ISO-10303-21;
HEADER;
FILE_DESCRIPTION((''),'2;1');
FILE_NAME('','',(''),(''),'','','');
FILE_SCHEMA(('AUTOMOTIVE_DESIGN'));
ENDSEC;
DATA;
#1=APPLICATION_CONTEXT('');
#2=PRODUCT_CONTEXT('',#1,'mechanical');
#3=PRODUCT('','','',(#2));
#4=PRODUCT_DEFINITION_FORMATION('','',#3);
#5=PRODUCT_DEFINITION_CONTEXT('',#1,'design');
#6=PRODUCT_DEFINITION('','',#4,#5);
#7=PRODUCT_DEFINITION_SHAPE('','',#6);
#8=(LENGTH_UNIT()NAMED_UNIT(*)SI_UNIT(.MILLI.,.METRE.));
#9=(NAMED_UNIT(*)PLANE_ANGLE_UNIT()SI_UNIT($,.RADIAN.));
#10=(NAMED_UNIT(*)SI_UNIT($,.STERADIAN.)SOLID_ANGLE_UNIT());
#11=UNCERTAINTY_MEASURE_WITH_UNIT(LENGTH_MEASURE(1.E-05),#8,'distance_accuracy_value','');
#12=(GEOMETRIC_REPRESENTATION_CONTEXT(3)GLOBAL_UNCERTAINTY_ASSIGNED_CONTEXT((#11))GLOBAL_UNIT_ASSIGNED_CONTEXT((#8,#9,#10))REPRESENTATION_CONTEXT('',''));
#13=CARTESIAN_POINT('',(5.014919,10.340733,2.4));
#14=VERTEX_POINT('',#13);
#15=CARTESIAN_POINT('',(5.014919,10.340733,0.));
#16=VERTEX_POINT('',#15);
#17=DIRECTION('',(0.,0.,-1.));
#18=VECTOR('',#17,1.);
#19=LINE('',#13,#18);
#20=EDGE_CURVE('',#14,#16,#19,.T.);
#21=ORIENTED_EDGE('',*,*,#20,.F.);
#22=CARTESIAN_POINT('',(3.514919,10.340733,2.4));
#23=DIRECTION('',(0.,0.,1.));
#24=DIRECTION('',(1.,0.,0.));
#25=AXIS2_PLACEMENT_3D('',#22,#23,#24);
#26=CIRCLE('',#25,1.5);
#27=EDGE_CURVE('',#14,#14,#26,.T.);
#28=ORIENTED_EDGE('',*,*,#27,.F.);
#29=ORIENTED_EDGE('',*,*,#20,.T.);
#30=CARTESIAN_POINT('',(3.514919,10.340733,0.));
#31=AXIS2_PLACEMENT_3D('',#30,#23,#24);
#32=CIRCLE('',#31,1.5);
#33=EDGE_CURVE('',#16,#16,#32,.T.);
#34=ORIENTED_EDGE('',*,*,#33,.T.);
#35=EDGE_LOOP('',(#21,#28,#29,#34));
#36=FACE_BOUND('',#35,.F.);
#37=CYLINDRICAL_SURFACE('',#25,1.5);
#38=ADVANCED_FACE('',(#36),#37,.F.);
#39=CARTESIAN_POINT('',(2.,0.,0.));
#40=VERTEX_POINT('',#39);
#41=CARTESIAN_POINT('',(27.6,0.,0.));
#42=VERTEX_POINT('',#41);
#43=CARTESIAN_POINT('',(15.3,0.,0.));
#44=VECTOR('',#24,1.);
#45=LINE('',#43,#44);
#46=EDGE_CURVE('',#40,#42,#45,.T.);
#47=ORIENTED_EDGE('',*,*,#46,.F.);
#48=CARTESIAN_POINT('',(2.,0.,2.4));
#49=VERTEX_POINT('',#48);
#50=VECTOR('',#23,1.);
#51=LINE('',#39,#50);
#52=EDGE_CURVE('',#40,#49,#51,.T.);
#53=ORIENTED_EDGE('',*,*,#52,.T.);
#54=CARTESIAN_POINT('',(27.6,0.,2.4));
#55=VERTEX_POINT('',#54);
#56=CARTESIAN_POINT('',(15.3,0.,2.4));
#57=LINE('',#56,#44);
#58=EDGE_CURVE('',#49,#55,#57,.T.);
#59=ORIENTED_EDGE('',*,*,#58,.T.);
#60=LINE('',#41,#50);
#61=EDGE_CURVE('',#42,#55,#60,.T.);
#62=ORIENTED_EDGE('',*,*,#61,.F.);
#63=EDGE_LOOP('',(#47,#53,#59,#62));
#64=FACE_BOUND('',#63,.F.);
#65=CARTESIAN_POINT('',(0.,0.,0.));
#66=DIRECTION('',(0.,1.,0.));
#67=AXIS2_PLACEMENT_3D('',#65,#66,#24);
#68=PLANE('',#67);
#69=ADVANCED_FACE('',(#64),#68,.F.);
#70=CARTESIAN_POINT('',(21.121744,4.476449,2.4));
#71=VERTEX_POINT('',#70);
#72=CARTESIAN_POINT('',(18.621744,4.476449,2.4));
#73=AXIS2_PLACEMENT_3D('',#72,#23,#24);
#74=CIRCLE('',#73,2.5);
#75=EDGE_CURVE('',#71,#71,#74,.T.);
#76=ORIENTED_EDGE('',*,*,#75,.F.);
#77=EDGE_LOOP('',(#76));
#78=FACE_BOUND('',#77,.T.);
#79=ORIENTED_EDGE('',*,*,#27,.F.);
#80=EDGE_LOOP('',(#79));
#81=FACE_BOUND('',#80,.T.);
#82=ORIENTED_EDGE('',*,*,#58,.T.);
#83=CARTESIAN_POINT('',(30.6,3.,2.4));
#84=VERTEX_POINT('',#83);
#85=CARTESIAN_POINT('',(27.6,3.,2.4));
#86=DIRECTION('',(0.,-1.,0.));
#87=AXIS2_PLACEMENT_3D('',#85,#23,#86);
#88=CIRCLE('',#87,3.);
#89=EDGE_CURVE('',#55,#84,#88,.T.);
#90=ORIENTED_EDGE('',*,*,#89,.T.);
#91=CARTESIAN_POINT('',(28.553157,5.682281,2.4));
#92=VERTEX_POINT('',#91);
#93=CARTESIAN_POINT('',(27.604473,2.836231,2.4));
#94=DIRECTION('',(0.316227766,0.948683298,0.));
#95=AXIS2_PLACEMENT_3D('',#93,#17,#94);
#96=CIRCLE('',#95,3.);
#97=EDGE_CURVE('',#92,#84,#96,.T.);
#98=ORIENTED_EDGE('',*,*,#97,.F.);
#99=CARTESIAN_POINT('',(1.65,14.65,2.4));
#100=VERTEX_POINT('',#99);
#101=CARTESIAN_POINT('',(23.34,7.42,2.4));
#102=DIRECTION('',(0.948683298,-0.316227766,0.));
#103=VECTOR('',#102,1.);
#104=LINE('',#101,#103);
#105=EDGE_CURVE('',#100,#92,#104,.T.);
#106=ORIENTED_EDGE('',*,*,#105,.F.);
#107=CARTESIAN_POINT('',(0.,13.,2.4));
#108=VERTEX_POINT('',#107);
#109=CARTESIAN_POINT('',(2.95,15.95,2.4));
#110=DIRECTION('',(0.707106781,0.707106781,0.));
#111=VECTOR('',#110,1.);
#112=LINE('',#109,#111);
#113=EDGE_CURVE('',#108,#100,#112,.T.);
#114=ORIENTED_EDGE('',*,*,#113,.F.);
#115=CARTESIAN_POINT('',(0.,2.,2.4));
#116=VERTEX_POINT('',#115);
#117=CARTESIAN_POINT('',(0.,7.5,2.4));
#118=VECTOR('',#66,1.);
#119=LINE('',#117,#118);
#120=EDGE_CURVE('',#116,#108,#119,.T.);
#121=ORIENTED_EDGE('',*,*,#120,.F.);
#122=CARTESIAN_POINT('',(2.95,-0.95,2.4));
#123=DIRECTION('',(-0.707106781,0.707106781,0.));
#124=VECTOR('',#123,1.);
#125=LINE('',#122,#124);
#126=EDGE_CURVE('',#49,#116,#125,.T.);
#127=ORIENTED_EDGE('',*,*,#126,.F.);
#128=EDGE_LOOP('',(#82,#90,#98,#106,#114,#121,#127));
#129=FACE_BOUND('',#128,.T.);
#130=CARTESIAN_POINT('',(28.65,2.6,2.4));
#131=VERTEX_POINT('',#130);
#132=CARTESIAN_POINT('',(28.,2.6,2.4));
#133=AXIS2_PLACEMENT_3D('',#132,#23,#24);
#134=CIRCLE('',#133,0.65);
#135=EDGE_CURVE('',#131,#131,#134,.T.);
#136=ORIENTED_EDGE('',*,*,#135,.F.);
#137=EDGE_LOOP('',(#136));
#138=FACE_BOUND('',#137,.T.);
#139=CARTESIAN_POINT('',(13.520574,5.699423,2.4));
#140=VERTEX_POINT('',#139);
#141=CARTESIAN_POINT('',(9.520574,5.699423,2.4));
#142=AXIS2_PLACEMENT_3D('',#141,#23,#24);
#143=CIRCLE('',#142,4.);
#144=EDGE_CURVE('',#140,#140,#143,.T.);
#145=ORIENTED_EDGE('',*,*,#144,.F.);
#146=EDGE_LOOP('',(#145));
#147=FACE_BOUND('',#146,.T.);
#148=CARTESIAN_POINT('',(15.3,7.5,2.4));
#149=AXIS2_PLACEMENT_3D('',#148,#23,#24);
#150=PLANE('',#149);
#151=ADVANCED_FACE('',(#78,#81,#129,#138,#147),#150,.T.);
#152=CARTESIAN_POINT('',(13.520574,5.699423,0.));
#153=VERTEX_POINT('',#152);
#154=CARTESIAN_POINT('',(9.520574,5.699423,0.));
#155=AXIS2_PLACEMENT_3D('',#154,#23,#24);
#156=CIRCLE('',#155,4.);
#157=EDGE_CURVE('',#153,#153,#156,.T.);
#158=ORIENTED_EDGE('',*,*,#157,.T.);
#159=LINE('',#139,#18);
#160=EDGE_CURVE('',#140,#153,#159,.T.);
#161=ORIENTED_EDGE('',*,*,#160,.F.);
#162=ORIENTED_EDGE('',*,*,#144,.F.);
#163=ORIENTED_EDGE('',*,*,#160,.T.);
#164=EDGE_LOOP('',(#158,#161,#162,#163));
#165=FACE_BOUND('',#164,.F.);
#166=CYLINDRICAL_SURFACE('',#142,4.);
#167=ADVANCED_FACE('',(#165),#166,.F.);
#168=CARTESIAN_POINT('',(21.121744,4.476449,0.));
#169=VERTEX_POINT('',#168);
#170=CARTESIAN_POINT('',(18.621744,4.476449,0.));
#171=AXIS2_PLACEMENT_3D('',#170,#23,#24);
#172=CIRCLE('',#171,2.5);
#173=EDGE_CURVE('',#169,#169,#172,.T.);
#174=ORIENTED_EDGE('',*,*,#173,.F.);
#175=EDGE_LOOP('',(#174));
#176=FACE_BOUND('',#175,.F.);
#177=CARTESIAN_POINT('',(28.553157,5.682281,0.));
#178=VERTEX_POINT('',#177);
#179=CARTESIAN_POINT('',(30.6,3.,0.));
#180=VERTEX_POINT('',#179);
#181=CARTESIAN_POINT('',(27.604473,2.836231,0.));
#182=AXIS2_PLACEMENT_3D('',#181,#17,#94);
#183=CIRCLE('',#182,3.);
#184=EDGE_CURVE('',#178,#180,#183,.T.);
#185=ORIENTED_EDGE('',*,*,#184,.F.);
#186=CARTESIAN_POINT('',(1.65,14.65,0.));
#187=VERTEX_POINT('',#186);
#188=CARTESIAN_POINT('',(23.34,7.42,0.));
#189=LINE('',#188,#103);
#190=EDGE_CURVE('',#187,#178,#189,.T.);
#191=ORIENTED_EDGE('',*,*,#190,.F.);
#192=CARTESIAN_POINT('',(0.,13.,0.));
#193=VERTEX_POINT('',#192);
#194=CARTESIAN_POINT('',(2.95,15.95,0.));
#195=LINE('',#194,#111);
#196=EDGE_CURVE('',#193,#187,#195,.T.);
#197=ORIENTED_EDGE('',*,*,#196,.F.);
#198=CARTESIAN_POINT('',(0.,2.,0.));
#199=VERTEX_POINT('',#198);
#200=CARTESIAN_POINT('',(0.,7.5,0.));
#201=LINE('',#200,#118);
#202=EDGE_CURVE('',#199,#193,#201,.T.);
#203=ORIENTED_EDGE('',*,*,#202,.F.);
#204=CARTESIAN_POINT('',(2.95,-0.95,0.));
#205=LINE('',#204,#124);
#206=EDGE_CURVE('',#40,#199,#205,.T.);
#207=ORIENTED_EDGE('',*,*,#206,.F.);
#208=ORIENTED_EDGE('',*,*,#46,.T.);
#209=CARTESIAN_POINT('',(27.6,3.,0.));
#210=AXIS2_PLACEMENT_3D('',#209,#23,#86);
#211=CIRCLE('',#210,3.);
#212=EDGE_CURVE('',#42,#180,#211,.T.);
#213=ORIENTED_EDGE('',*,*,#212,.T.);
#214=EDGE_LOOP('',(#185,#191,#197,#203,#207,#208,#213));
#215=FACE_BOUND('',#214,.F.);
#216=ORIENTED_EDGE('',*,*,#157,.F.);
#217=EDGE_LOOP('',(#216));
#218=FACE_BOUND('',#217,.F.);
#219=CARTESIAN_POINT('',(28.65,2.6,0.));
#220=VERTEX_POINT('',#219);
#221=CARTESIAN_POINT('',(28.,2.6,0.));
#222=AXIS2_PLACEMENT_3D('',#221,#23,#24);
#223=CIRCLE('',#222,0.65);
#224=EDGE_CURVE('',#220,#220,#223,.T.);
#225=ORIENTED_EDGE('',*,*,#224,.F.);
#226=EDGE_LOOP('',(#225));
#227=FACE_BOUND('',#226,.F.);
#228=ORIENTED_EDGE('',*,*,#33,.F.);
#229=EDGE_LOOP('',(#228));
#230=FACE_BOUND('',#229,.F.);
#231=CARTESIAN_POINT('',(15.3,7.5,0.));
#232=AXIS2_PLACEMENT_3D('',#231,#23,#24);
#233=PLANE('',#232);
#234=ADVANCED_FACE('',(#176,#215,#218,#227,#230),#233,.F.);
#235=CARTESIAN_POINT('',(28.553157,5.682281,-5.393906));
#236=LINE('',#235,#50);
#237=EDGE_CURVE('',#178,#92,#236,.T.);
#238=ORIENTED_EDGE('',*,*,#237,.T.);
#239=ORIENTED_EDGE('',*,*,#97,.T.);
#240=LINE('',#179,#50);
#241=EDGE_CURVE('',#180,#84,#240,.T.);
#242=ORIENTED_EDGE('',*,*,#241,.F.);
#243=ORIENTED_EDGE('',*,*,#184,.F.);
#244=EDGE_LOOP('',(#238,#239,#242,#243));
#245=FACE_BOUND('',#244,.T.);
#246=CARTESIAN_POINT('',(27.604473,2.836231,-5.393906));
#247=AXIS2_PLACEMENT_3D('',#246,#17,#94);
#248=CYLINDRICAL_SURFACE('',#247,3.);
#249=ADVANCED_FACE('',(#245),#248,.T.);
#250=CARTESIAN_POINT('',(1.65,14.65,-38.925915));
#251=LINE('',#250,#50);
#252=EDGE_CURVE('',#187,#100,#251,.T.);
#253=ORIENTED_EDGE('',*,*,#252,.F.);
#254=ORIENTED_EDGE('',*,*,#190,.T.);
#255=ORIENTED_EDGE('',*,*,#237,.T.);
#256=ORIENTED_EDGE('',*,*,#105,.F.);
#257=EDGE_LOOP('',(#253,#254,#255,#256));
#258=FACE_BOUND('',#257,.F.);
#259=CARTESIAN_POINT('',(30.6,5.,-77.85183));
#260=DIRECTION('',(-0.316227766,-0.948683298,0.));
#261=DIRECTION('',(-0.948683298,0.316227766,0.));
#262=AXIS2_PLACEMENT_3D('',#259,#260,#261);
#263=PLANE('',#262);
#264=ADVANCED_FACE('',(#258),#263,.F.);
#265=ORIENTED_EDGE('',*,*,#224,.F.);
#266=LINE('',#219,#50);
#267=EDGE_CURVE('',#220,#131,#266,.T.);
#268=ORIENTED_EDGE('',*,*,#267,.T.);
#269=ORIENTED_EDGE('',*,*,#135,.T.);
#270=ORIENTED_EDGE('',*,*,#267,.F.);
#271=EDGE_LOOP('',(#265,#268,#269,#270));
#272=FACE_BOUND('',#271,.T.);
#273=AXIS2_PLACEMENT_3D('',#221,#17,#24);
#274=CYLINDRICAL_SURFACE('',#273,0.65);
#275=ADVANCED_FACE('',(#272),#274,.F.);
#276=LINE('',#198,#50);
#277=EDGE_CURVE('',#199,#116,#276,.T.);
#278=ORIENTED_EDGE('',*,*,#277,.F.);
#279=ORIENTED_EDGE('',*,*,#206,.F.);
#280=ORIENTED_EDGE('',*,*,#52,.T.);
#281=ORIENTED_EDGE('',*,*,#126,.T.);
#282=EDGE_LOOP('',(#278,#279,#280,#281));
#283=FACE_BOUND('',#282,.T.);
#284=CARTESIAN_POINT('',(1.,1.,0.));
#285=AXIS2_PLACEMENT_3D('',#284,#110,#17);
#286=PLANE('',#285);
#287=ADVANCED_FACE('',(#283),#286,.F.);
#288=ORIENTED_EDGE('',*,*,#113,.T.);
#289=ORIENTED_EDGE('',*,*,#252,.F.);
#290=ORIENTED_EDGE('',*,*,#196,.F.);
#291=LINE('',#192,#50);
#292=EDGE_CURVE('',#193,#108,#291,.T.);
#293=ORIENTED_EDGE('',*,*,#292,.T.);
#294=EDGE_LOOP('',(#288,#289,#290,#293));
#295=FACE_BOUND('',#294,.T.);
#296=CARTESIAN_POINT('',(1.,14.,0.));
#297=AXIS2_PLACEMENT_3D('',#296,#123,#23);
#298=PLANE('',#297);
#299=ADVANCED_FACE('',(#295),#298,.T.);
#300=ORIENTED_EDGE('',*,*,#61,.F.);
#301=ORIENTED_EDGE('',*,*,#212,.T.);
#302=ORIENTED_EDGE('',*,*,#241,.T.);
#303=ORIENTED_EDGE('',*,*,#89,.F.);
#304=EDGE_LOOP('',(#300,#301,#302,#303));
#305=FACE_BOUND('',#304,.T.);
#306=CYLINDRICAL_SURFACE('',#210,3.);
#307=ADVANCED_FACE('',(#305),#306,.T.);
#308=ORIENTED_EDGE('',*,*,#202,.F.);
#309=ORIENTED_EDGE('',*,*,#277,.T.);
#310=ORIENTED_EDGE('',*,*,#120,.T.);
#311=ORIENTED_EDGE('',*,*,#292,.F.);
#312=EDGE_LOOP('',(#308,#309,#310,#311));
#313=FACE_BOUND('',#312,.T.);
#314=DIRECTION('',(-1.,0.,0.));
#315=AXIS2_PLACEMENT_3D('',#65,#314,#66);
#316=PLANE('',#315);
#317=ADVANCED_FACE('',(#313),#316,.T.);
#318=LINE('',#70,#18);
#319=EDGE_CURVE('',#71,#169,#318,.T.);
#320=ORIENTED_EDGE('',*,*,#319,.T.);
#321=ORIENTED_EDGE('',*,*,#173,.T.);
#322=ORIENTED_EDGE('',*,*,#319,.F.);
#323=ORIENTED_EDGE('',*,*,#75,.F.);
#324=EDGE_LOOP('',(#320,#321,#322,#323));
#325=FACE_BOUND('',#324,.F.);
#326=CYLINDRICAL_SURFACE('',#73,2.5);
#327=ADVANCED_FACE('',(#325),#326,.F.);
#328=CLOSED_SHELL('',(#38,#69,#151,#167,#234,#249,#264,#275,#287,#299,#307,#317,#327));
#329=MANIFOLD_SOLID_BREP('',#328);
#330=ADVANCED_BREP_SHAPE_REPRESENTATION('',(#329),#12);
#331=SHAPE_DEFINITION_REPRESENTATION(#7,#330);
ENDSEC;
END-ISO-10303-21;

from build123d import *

# Parameters (mm, degrees)
F0_W        = 30.6
F0_H        = 15
F0_R        = 0.65
F1_DEPTH    = 2.4
F2_R        = 3
F3_SIZE     = 2
F4_T1_DEPTH = 158.1036606393
F5_T1_DEPTH = 13.1878115659
F6_R        = 1.5
F6_R_2      = 4
F6_R_3      = 2.5
F7_DEPTH    = 25


# Not quite as in the source:
# - a fillet or chamfer that OpenCascade refuses, or shapes differently, is made with other operations: its cross-section is extruded or revolved along the edge and cut away or added


with BuildPart() as f1:
    # F0 (on Top) → F1 (new body)
    with BuildSketch(Plane.XY):
        with Locations((15.3, 7.5)):
            Rectangle(F0_W, F0_H)
        with Locations((28, 2.6)):
            Circle(F0_R, mode=Mode.SUBTRACT)
    extrude(amount=F1_DEPTH)

    # F2
    f2_edges = [f1.edges().sort_by_distance(p)[0] for p in [
        (30.6, 0, 1.2),
    ]]
    fillet(f2_edges, radius=F2_R)

    # F3
    f3_edges = [f1.edges().sort_by_distance(p)[0] for p in [
        (0, 0, 1.2),
        (0, 15, 1.2),
    ]]
    chamfer(f3_edges, length=F3_SIZE)

    # F4: chamfer of 30 x 10 on 1 edges, made by hand

    # F4_s2 → F4_t1 (cut)
    with BuildSketch(Plane.XY.offset(-77.8518303197)):
        Polygon((30.6, 5), (0.6, 15), (30.6, 15), align=None)
    extrude(amount=F4_T1_DEPTH, mode=Mode.SUBTRACT)

    # F5: fillet of radius 3 on 1 edges, made by hand

    # F5_s2 → F5_t1 (cut)
    with BuildSketch(Plane.XY.offset(-5.3939057829)):
        with BuildLine():
            ThreePointArc((28.553156669, 5.6822811103), (29.9893960062, 4.6561608917), (30.6, 3))
            Line((30.6, 3), (30.6, 5))
            Line((30.6, 5), (28.553156669, 5.6822811103))
        make_face()
    extrude(amount=F5_T1_DEPTH, mode=Mode.SUBTRACT)

    # F6 (on face) → F7 (cut)
    with BuildSketch(Plane.XY.offset(2.4)):
        with Locations((3.5149192099, 10.3407332852)):
            Circle(F6_R)
        with Locations((9.5205735153, 5.6994225355)):
            Circle(F6_R_2)
        with Locations((18.6217441043, 4.476449427)):
            Circle(F6_R_3)
    extrude(amount=-F7_DEPTH, mode=Mode.SUBTRACT)


solid = f1.part
